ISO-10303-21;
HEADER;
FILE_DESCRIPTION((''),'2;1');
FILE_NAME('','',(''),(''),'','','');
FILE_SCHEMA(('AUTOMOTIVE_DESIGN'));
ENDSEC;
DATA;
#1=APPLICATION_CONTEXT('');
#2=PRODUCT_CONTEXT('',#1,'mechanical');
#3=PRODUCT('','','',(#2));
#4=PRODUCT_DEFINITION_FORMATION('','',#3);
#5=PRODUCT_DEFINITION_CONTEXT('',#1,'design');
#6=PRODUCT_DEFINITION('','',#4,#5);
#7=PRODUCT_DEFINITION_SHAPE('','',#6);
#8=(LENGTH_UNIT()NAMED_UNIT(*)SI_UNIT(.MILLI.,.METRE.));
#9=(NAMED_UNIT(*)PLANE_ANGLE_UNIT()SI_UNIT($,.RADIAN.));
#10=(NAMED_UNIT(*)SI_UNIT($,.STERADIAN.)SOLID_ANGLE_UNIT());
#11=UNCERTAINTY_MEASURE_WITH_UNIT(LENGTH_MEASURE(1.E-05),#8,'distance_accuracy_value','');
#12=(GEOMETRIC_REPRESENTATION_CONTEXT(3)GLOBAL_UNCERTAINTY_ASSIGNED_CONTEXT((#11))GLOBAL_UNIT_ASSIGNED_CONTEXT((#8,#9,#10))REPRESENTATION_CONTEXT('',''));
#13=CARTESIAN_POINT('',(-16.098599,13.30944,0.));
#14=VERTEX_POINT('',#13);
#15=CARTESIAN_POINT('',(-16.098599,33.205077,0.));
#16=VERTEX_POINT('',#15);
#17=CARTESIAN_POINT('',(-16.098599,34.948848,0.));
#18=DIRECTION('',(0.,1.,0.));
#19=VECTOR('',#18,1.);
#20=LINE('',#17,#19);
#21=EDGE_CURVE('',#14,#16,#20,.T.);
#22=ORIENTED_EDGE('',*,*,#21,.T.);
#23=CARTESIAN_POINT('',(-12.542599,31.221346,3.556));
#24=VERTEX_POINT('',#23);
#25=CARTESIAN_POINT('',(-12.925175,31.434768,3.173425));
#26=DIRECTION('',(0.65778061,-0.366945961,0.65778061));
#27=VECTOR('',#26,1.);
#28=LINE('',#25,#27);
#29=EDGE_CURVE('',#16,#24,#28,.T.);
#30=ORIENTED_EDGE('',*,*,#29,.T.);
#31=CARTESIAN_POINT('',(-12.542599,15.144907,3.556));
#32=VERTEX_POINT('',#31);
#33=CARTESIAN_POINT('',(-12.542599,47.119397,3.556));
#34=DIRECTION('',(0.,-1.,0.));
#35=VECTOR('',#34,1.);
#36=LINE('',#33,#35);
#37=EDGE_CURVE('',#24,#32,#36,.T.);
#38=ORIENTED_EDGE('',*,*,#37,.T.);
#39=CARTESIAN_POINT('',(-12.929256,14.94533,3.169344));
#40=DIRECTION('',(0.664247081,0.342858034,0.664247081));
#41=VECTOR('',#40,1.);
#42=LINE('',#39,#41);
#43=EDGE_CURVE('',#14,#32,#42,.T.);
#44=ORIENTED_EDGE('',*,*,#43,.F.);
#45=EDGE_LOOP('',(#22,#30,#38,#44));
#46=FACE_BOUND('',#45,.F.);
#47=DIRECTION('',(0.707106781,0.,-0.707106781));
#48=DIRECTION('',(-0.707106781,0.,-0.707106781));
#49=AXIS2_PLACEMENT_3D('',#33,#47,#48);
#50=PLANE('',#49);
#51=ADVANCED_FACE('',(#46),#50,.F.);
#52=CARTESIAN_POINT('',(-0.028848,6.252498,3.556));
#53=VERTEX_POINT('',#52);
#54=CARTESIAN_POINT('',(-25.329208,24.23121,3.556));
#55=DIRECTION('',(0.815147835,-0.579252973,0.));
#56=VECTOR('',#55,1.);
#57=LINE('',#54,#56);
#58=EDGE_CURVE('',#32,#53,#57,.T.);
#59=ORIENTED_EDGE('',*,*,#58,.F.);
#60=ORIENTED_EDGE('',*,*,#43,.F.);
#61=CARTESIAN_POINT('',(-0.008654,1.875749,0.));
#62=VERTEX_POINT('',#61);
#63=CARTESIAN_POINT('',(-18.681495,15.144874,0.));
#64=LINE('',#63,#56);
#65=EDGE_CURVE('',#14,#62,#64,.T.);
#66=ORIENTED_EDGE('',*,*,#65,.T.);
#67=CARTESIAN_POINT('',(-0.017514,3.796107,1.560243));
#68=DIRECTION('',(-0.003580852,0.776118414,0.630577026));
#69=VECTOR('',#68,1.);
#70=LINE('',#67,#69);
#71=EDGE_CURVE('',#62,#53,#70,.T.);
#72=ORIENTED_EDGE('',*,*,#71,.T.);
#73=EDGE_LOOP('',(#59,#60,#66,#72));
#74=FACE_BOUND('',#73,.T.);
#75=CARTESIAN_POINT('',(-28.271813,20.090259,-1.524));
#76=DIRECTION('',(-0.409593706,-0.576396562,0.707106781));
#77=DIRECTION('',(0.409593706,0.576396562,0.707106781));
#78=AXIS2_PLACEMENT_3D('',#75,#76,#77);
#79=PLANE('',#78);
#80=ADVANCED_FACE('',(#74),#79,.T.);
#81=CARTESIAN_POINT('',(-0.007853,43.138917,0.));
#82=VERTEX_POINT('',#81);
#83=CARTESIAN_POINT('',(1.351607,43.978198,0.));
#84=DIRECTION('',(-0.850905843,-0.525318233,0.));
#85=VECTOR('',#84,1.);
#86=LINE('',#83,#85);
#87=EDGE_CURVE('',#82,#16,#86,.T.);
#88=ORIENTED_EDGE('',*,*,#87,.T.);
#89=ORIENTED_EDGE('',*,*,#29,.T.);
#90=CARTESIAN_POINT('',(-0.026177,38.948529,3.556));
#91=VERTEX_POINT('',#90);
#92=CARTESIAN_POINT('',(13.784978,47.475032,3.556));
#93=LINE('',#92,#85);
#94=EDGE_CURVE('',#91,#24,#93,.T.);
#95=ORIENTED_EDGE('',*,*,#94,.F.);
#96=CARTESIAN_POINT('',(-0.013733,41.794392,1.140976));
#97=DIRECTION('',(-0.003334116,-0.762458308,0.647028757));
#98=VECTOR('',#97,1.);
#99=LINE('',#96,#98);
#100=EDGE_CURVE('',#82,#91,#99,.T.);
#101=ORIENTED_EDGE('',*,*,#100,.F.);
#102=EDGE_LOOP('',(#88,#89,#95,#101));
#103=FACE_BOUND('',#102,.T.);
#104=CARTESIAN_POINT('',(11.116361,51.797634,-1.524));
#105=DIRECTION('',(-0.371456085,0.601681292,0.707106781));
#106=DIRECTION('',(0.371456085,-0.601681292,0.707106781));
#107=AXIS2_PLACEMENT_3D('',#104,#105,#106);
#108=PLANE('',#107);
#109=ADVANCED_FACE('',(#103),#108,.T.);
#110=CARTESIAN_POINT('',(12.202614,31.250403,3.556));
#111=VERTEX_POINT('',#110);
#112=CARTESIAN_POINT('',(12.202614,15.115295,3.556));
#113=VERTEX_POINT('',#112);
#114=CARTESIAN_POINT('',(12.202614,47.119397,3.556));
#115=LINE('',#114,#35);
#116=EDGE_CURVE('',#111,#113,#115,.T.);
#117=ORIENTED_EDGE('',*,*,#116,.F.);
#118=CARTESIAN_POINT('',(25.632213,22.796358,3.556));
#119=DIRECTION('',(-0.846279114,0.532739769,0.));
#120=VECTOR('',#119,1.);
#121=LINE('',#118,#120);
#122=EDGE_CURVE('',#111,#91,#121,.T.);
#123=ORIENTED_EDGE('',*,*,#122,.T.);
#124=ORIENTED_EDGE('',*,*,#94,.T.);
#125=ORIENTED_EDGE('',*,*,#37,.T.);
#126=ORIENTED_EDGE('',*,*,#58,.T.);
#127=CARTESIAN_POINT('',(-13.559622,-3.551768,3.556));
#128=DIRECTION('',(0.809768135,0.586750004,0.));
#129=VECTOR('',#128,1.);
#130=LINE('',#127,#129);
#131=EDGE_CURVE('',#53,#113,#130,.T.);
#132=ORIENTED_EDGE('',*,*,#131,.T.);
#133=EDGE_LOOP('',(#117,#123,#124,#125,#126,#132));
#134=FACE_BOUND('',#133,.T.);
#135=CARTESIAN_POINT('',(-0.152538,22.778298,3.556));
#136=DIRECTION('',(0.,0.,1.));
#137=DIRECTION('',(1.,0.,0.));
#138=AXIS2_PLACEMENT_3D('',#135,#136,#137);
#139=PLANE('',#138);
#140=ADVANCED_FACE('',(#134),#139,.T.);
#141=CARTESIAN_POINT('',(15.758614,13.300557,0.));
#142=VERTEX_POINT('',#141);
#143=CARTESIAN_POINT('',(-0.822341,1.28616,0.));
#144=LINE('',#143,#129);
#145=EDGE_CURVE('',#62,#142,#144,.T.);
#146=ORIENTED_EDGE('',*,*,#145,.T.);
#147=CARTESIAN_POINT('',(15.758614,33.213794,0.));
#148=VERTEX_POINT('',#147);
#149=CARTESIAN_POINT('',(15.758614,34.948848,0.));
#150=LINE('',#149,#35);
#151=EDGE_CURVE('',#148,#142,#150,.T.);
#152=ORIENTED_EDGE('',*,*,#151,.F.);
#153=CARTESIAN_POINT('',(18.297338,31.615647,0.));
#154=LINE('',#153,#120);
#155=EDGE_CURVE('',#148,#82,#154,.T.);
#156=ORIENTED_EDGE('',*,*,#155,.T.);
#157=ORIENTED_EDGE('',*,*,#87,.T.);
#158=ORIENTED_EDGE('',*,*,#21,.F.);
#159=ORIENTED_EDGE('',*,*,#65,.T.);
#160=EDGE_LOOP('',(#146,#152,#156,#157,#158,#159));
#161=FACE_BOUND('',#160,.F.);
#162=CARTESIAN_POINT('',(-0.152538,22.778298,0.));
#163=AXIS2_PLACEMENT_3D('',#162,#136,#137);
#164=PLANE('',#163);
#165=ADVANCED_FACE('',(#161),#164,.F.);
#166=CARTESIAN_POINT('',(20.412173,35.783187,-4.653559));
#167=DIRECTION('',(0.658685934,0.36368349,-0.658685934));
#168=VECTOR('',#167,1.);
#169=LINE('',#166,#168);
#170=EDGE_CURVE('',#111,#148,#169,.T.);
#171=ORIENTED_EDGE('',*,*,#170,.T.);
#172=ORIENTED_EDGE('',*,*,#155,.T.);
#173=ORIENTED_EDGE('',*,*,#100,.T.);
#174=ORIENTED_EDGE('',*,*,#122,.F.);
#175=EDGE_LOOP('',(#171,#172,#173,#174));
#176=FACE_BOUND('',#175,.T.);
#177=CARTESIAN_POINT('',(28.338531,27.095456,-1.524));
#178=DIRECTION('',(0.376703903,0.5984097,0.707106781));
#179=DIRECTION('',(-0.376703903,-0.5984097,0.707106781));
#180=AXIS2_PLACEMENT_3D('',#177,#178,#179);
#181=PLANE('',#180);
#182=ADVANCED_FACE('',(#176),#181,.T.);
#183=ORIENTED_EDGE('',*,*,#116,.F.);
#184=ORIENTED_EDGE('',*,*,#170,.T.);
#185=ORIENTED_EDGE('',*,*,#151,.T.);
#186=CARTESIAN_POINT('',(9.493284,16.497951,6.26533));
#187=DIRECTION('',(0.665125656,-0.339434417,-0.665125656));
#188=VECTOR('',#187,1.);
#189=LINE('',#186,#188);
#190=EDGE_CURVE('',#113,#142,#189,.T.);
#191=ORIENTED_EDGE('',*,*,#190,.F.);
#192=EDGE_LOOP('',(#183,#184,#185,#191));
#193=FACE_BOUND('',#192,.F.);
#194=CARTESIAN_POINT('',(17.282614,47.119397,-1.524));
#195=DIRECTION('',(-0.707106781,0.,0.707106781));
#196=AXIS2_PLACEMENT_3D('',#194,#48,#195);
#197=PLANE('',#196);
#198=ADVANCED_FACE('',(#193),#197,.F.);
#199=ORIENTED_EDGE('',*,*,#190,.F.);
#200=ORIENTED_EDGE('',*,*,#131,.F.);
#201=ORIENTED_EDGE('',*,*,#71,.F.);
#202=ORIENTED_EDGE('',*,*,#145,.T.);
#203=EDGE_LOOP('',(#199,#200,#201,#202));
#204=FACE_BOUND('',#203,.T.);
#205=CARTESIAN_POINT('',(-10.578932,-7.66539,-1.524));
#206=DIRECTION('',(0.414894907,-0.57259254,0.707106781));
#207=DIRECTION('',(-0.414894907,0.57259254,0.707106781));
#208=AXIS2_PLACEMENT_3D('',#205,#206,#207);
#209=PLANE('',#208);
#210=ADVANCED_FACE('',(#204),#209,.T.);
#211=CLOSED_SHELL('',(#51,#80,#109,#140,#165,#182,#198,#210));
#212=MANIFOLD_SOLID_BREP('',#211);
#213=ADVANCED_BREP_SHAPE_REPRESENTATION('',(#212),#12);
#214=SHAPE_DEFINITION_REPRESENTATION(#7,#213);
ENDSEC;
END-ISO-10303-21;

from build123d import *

# Parameters (mm, degrees)
F1_DEPTH    = 0.508
F2_DEPTH    = 3.048
F3_T1_DEPTH = 47.7471989741
F3_T3_DEPTH = 47.4709696523
F3_T5_DEPTH = 47.6607350592
F3_T7_DEPTH = 46.5501838511
F3_T9_DEPTH = 46.8386979916


# Not quite as in the source:
# - a fillet or chamfer that OpenCascade refuses, or shapes differently, is made with other operations: its cross-section is extruded or revolved along the edge and cut away or added


with BuildPart() as f1:
    # F0 (on Top) → F1 (new body)
    with BuildSketch(Plane.XY):
        Polygon((-17.6225993782, 12.5228120014), (0, 0), (17.2826144844, 12.5228120014), (17.2826144844, 34.0552479029), (0, 44.934798032), (-17.6225993782, 34.0552479029), align=None)
    extrude(amount=F1_DEPTH)

    # F2 (add): a face of the model
    f2_faces = [f1.faces().sort_by_distance(p)[0] for p in [
        (-0.1500416402, 22.8299999891, 0.508),
    ]]
    extrude(f2_faces, amount=F2_DEPTH)

    # F3: chamfer of 5.08 on 6 edges, made by hand

    # F3_s2 → F3_t1 (cut)
    with BuildSketch(Plane(origin=(-28.2718126223, 20.0902594906, 0), x_dir=(0, 0, 1), z_dir=(0.8151478349, -0.5792529735, 0))):
        Polygon((-1.524, 0), (3.556, -5.08), (3.556, 0), align=None)
    extrude(amount=F3_T1_DEPTH, mode=Mode.SUBTRACT)

    # F3_s4 → F3_t3 (cut)
    with BuildSketch(Plane(origin=(-10.5789320411, -7.6653898197, 0), x_dir=(0, 0, 1), z_dir=(0.8097681351, 0.5867500042, 0))):
        Polygon((-1.524, 0), (3.556, -5.08), (3.556, 0), align=None)
    extrude(amount=F3_T3_DEPTH, mode=Mode.SUBTRACT)

    # F3_s6 → F3_t5 (cut)
    with BuildSketch(Plane.XZ.offset(-47.1193974817)):
        Polygon((17.2826144844, -1.524), (12.2026144844, 3.556), (17.2826144844, 3.556), align=None)
        Polygon((-12.5425993782, 3.556), (-17.6225993782, -1.524), (-17.6225993782, 3.556), align=None)
    extrude(amount=F3_T5_DEPTH, mode=Mode.SUBTRACT)

    # F3_s8 → F3_t7 (cut)
    with BuildSketch(Plane(origin=(8.0798332195, -5.0863224789, 0), x_dir=(0, 0, 1), z_dir=(-0.846279114, 0.5327397688, 0))):
        Polygon((-1.524, 38.0273810661), (3.556, 32.9473810661), (3.556, 38.0273810661), align=None)
    extrude(amount=F3_T7_DEPTH, mode=Mode.SUBTRACT)

    # F3_s10 → F3_t9 (cut)
    with BuildSketch(Plane(origin=(31.2020521098, 19.2630089793, 0), x_dir=(0, 0, 1), z_dir=(-0.850905843, -0.5253182334, 0))):
        Polygon((-1.524, 38.2352821986), (3.556, 33.1552821986), (3.556, 38.2352821986), align=None)
    extrude(amount=F3_T9_DEPTH, mode=Mode.SUBTRACT)


solid = f1.part
